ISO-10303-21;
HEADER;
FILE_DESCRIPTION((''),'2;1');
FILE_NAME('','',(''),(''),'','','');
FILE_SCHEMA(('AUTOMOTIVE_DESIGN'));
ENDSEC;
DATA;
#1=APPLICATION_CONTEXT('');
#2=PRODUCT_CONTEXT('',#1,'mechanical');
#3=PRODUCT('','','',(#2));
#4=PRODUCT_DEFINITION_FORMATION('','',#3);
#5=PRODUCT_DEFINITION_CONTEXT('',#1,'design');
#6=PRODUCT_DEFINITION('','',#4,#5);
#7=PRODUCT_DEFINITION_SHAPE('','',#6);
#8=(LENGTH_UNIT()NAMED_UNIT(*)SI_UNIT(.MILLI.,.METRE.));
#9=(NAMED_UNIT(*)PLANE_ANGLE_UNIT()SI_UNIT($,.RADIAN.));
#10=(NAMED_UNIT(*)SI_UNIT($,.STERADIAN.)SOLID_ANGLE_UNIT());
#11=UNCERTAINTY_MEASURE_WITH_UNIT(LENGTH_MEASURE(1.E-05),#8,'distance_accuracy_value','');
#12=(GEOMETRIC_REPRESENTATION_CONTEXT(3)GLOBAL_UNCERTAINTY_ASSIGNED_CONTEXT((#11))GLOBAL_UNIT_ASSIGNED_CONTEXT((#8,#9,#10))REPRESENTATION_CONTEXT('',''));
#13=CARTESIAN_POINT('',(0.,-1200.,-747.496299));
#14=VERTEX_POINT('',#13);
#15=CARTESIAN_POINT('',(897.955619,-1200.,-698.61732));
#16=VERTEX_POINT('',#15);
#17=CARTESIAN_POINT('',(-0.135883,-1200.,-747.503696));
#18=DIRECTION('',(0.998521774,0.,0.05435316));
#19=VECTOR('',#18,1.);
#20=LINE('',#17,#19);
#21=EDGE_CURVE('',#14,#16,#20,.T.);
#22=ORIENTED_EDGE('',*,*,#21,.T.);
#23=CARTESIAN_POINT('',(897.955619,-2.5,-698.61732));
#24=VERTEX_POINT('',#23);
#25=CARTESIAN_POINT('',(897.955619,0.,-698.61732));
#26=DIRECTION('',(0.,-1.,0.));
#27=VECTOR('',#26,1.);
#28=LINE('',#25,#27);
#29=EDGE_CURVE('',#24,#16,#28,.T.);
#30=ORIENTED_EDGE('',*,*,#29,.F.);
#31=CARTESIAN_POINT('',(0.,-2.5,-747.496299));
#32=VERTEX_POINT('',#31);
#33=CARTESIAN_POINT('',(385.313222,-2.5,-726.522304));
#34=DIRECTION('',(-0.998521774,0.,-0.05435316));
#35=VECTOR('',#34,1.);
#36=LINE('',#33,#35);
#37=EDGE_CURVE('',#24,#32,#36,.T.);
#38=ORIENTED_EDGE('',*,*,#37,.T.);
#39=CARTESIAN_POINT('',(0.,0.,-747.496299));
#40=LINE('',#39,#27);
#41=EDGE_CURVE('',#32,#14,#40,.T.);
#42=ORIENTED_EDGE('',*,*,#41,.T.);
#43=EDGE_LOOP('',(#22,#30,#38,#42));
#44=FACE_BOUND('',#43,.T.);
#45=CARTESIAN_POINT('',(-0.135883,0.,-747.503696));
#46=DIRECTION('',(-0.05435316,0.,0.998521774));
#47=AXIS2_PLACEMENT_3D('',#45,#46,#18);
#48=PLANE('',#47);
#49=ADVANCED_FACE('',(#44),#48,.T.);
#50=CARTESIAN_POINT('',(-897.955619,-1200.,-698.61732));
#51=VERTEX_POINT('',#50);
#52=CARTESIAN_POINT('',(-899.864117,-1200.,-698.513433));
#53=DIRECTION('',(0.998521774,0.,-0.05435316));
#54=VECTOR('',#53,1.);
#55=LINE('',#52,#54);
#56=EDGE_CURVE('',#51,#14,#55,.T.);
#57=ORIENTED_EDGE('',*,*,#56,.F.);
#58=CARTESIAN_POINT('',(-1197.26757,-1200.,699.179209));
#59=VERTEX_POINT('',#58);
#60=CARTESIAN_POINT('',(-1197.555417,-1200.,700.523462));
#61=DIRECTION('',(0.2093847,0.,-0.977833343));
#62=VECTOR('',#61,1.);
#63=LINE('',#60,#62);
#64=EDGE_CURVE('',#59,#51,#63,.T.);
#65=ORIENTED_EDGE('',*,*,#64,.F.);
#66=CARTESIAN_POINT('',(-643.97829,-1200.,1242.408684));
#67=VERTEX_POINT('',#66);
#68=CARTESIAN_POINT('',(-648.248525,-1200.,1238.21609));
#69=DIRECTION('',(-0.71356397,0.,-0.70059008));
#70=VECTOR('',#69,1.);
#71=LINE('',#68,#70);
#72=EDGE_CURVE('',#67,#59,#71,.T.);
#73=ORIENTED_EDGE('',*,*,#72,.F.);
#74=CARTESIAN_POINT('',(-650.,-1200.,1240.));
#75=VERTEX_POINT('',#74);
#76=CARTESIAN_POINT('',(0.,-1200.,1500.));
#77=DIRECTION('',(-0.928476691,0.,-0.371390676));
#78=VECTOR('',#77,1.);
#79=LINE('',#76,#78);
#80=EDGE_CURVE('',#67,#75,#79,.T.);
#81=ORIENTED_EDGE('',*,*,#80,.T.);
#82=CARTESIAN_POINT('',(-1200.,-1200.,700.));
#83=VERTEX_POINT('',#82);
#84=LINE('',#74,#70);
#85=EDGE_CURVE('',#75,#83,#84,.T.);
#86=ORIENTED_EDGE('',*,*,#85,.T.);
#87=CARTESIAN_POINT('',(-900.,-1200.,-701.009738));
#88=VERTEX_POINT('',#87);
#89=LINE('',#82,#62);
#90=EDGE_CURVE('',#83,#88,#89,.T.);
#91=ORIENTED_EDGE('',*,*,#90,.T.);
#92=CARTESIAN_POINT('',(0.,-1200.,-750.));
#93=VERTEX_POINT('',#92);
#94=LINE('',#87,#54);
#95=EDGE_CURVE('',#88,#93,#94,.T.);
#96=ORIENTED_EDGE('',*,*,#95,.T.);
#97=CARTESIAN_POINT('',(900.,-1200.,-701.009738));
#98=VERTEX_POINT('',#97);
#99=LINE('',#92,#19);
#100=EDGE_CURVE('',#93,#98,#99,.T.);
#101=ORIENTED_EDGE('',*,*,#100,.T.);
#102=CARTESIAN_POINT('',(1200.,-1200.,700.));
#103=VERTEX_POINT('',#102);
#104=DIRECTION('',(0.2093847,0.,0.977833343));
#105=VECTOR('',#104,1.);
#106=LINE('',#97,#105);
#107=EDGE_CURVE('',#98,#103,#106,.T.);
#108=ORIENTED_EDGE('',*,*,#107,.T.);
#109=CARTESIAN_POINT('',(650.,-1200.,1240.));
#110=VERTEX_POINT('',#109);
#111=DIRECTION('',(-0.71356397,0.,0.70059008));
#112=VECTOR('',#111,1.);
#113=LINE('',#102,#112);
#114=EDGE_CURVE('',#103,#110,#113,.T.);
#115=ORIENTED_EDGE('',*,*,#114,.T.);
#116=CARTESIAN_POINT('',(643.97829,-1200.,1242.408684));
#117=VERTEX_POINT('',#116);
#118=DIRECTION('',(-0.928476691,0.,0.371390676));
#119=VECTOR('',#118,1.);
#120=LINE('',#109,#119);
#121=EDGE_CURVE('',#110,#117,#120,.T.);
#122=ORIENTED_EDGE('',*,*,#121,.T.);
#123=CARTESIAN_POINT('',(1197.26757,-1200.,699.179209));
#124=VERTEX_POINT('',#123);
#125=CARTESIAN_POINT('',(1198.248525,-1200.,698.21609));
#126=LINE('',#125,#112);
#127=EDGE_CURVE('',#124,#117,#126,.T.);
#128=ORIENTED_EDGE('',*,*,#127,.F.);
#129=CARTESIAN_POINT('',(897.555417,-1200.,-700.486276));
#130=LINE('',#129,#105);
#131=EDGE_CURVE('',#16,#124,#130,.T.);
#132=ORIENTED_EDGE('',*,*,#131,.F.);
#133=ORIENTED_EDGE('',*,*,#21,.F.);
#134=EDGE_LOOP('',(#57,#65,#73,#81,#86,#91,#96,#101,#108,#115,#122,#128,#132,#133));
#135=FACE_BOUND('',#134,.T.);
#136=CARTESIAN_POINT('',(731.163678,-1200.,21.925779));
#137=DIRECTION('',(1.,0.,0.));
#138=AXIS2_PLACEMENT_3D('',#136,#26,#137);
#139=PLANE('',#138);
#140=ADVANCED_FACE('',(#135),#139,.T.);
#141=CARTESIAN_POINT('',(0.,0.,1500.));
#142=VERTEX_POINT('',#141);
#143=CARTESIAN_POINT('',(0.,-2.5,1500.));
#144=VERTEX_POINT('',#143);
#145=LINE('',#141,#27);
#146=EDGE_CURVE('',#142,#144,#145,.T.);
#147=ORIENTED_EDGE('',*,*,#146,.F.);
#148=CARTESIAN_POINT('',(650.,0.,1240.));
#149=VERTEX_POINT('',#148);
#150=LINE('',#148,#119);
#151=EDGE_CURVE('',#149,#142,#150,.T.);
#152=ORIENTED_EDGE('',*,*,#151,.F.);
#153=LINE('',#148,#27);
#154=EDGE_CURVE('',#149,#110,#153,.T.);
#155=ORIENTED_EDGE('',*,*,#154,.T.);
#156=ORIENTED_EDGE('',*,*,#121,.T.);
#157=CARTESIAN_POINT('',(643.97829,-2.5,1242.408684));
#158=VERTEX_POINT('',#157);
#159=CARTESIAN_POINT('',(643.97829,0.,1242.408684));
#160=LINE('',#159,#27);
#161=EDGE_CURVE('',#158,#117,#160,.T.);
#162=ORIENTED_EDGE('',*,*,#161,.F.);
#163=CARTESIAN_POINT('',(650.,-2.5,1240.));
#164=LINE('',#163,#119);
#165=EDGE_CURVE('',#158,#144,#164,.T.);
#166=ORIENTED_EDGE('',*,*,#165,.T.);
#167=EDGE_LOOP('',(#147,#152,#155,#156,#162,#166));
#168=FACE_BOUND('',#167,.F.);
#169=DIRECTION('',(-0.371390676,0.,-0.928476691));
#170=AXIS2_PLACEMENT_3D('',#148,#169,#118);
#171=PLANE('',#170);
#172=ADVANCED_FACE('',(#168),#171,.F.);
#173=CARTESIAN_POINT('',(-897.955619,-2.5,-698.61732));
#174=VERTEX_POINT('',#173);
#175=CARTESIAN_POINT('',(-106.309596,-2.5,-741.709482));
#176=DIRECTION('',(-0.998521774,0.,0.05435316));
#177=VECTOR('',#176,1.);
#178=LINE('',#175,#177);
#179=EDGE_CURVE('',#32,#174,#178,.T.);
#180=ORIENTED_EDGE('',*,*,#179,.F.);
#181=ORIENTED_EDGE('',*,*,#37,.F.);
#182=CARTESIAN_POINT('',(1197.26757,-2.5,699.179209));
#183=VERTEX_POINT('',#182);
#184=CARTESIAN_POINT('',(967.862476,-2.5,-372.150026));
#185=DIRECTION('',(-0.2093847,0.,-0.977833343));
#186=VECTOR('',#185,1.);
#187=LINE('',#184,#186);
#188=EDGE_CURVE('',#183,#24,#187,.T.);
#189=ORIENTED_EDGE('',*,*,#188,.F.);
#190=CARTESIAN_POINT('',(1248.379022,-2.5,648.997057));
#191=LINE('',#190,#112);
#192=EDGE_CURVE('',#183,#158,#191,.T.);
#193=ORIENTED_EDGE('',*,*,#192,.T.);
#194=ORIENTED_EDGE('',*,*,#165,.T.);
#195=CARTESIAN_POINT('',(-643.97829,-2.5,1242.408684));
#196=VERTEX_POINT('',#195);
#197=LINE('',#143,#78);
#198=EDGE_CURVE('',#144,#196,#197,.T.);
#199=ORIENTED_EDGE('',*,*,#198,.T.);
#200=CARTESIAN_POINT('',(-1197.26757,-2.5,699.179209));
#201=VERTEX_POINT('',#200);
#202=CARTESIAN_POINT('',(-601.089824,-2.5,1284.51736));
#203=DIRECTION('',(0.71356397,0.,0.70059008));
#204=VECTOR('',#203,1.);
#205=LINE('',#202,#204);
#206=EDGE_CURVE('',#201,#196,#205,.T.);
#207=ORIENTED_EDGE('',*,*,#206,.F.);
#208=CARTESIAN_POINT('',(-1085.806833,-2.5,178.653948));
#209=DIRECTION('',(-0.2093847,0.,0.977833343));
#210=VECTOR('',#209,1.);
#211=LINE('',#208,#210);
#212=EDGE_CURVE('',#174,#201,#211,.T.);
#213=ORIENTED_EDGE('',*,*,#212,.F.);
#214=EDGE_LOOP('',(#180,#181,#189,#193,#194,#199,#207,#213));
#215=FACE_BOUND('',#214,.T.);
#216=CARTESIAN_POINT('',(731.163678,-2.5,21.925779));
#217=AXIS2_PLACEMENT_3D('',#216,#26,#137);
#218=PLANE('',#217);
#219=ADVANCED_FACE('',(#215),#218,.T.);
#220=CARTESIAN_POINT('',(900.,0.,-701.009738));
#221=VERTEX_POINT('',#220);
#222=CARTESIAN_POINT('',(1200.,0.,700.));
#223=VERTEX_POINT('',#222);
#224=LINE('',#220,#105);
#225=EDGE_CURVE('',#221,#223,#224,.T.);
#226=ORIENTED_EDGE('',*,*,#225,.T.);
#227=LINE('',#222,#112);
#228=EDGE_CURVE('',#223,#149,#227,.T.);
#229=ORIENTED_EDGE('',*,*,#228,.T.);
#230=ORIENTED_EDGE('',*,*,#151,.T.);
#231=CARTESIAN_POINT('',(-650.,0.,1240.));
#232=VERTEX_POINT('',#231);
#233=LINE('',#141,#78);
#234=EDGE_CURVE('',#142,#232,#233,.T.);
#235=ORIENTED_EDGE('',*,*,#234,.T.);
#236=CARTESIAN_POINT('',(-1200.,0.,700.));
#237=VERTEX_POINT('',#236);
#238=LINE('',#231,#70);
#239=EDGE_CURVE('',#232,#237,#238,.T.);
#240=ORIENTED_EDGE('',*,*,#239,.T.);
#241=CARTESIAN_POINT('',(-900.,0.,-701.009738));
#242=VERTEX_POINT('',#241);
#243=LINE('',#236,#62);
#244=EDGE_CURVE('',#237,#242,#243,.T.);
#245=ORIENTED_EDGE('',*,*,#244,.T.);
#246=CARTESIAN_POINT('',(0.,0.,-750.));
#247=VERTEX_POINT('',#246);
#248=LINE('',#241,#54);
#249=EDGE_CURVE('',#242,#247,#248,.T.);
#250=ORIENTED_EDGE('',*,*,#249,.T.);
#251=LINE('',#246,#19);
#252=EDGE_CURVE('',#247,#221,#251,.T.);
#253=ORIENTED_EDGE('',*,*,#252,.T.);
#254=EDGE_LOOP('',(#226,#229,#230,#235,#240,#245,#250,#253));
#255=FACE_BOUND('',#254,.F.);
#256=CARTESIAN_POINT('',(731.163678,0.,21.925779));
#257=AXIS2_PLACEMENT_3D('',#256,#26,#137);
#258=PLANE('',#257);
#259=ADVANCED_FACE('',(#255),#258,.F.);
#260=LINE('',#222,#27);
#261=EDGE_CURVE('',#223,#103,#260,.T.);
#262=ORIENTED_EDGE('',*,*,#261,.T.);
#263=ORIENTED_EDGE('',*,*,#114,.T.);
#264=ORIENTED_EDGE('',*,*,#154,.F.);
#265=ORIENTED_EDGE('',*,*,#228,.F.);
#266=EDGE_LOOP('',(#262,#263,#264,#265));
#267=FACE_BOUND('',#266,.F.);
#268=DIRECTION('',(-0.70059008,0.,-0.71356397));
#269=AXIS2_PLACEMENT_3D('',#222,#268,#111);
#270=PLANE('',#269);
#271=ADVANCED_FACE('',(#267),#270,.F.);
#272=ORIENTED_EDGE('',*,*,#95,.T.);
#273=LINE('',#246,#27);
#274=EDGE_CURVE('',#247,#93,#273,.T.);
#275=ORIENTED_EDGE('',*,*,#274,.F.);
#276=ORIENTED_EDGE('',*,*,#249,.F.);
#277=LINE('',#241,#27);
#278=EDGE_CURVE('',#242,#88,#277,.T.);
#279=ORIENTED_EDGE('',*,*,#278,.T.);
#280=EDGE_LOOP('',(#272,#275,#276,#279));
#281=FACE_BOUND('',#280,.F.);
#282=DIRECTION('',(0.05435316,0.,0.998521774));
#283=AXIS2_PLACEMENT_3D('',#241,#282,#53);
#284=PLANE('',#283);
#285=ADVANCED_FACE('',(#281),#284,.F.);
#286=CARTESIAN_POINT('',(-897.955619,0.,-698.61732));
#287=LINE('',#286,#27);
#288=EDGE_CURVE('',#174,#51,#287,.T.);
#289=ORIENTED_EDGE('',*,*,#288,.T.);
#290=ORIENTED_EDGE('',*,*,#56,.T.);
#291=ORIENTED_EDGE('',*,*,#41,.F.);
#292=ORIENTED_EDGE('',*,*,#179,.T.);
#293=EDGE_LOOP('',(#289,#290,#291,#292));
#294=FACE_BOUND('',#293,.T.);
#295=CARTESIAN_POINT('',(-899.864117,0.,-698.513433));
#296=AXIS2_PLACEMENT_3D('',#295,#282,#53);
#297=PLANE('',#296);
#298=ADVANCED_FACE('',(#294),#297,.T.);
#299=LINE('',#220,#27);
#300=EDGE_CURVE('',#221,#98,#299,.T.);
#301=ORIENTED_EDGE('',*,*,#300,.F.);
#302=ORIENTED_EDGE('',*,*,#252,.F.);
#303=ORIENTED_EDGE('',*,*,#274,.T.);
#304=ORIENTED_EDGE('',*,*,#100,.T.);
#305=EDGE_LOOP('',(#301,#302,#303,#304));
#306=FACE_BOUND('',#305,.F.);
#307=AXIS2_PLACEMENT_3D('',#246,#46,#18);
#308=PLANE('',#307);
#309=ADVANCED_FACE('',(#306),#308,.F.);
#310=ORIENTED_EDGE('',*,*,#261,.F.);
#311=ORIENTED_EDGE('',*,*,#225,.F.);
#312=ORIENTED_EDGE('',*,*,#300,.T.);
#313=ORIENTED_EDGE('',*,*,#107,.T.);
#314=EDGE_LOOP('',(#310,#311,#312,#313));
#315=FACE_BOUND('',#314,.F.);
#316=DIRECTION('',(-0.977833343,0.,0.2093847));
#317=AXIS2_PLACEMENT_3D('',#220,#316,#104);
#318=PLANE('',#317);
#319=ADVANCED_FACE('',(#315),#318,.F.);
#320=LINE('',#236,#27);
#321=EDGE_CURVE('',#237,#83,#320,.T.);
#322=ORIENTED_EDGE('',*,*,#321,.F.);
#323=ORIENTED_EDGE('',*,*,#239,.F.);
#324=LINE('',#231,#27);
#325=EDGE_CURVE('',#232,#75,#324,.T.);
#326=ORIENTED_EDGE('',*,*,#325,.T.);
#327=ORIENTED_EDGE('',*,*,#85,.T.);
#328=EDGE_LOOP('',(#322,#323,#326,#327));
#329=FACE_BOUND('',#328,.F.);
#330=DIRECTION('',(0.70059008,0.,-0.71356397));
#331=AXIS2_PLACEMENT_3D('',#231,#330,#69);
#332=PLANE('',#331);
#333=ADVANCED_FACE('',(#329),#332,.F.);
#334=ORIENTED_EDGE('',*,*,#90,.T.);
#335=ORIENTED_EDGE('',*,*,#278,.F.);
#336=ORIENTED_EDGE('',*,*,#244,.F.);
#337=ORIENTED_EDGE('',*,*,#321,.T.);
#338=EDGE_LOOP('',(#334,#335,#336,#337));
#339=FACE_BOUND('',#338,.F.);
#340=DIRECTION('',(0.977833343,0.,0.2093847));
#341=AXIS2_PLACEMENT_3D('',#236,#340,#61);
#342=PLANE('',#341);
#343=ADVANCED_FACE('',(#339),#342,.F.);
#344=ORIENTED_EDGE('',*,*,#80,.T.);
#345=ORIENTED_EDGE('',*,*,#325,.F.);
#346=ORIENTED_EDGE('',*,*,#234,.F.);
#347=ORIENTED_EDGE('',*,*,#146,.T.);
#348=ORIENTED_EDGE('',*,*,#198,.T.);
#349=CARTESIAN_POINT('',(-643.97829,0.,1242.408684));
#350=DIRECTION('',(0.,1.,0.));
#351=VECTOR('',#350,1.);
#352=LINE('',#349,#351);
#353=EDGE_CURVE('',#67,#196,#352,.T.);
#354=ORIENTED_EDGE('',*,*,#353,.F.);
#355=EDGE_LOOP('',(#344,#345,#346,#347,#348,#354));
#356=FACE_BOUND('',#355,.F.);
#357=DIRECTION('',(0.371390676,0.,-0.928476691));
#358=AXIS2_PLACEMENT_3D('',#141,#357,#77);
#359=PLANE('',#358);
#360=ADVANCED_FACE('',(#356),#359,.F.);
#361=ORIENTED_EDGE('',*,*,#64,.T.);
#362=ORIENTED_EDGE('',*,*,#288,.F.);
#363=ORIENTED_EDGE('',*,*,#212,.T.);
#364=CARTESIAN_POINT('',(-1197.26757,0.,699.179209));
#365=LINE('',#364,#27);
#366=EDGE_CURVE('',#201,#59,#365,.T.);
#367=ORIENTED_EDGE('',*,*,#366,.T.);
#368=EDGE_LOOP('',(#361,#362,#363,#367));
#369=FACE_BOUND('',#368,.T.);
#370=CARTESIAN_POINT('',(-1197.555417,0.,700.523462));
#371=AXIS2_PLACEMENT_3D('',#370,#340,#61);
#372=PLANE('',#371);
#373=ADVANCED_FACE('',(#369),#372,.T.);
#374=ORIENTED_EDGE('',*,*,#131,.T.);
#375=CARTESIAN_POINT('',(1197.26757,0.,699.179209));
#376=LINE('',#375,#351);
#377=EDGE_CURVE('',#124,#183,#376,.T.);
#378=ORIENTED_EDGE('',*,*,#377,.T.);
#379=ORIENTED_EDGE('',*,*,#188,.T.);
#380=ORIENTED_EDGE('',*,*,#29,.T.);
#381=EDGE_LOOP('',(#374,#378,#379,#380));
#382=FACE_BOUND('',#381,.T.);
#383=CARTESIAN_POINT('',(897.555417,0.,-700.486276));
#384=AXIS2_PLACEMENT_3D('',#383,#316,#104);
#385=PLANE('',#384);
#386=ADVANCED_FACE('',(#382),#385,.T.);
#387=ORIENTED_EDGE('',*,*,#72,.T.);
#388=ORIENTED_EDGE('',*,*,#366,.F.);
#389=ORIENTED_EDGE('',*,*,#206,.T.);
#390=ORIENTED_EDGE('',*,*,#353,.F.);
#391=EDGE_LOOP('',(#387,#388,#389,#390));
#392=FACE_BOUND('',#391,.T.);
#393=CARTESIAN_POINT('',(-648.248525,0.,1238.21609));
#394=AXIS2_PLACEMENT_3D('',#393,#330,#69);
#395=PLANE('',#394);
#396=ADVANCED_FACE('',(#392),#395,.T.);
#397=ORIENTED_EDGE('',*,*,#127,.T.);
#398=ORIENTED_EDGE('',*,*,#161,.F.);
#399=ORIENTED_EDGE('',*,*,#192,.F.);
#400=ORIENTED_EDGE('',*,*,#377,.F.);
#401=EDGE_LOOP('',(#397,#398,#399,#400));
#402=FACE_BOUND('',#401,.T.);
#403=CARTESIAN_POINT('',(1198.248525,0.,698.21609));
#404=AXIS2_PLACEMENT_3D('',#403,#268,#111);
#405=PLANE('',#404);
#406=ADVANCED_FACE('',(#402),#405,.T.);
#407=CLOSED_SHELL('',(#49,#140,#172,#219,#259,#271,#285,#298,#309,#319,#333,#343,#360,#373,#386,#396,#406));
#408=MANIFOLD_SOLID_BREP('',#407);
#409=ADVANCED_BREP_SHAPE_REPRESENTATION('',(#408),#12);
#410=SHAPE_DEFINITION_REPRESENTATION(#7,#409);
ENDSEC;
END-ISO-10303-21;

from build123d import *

# Parameters (mm, degrees)
F1_DEPTH = 1200
F2_T     = -2.5


# Not quite as in the source:
# - the program builds the solid bodies; features that only make, move or delete a surface that nothing else refers to are left out


with BuildPart() as f1:
    # F0 (on Front) → F1 (new body)
    with BuildSketch(Plane.XZ):
        with BuildLine():
            Line((1200, 700), (64.7834175674, 37.7903269143))
            ThreePointArc((64.7834175674, 37.7903269143), (72.4008160091, 19.5734984411), (75, 0))
            ThreePointArc((75, 0), (70.9319827149, -24.3650123769), (59.1692312499, -46.0868969805))
            Line((59.1692312499, -46.0868969805), (900, -701.0097377681))
            Line((900, -701.0097377681), (1200, 700))
        make_face()
        with BuildLine():
            Line((0, -750), (900, -701.0097377681))
            Line((900, -701.0097377681), (59.1692312499, -46.0868969805))
            ThreePointArc((59.1692312499, -46.0868969805), (32.9278205053, -67.3851514562), (0, -75))
            Line((0, -75), (0, -750))
        make_face()
        with BuildLine():
            ThreePointArc((0, -75), (-32.9278205053, -67.3851514562), (-59.1692312499, -46.0868969805))
            Line((-59.1692312499, -46.0868969805), (-900, -701.0097377681))
            Line((-900, -701.0097377681), (0, -750))
            Line((0, -750), (0, -75))
        make_face()
        with BuildLine():
            ThreePointArc((-59.1692312499, -46.0868969805), (-74.8325594864, -5.0087963342), (-64.7834175674, 37.7903269143))
            Line((-64.7834175674, 37.7903269143), (-1200, 700))
            Line((-1200, 700), (-900, -701.0097377681))
            Line((-900, -701.0097377681), (-59.1692312499, -46.0868969805))
        make_face()
        with BuildLine():
            ThreePointArc((-64.7834175674, 37.7903269143), (-51.8193989205, 54.2194604872), (-34.8205403037, 66.426876887))
            Line((-34.8205403037, 66.426876887), (-650, 1240))
            Line((-650, 1240), (-1200, 700))
            Line((-1200, 700), (-64.7834175674, 37.7903269143))
        make_face()
        with BuildLine():
            ThreePointArc((-34.8205403037, 66.426876887), (-17.9302012464, 72.8251871488), (0, 75))
            Line((0, 75), (0, 1500))
            Line((0, 1500), (-650, 1240))
            Line((-650, 1240), (-34.8205403037, 66.426876887))
        make_face()
        with BuildLine():
            Line((0, 1500), (0, 75))
            ThreePointArc((0, 75), (17.9302012464, 72.8251871488), (34.8205403037, 66.426876887))
            Line((34.8205403037, 66.426876887), (650, 1240))
            Line((650, 1240), (0, 1500))
        make_face()
        with BuildLine():
            Line((650, 1240), (34.8205403037, 66.426876887))
            ThreePointArc((34.8205403037, 66.426876887), (51.8193989205, 54.2194604872), (64.7834175674, 37.7903269143))
            Line((64.7834175674, 37.7903269143), (1200, 700))
            Line((1200, 700), (650, 1240))
        make_face()
        with BuildLine():
            ThreePointArc((34.8205403037, 66.426876887), (17.9302012464, 72.8251871488), (0, 75))
            ThreePointArc((0, 75), (-17.9302012464, 72.8251871488), (-34.8205403037, 66.426876887))
            ThreePointArc((-34.8205403037, 66.426876887), (-51.8193989205, 54.2194604872), (-64.7834175674, 37.7903269143))
            ThreePointArc((-64.7834175674, 37.7903269143), (-74.8325594864, -5.0087963342), (-59.1692312499, -46.0868969805))
            ThreePointArc((-59.1692312499, -46.0868969805), (-32.9278205053, -67.3851514562), (0, -75))
            ThreePointArc((0, -75), (32.9278205053, -67.3851514562), (59.1692312499, -46.0868969805))
            ThreePointArc((59.1692312499, -46.0868969805), (70.9319827149, -24.3650123769), (75, 0))
            ThreePointArc((75, 0), (72.4008160091, 19.5734984411), (64.7834175674, 37.7903269143))
            ThreePointArc((64.7834175674, 37.7903269143), (51.8193989205, 54.2194604872), (34.8205403037, 66.426876887))
        make_face()
    extrude(amount=F1_DEPTH)

    # F2
    f2_openings = [f1.faces().sort_by_distance(p)[0] for p in [
        (-325, -600, 1370),
        (325, -600, 1370),
        (0, -1200, 296.454391),
    ]]
    offset(amount=F2_T, openings=f2_openings)


solid = f1.part
